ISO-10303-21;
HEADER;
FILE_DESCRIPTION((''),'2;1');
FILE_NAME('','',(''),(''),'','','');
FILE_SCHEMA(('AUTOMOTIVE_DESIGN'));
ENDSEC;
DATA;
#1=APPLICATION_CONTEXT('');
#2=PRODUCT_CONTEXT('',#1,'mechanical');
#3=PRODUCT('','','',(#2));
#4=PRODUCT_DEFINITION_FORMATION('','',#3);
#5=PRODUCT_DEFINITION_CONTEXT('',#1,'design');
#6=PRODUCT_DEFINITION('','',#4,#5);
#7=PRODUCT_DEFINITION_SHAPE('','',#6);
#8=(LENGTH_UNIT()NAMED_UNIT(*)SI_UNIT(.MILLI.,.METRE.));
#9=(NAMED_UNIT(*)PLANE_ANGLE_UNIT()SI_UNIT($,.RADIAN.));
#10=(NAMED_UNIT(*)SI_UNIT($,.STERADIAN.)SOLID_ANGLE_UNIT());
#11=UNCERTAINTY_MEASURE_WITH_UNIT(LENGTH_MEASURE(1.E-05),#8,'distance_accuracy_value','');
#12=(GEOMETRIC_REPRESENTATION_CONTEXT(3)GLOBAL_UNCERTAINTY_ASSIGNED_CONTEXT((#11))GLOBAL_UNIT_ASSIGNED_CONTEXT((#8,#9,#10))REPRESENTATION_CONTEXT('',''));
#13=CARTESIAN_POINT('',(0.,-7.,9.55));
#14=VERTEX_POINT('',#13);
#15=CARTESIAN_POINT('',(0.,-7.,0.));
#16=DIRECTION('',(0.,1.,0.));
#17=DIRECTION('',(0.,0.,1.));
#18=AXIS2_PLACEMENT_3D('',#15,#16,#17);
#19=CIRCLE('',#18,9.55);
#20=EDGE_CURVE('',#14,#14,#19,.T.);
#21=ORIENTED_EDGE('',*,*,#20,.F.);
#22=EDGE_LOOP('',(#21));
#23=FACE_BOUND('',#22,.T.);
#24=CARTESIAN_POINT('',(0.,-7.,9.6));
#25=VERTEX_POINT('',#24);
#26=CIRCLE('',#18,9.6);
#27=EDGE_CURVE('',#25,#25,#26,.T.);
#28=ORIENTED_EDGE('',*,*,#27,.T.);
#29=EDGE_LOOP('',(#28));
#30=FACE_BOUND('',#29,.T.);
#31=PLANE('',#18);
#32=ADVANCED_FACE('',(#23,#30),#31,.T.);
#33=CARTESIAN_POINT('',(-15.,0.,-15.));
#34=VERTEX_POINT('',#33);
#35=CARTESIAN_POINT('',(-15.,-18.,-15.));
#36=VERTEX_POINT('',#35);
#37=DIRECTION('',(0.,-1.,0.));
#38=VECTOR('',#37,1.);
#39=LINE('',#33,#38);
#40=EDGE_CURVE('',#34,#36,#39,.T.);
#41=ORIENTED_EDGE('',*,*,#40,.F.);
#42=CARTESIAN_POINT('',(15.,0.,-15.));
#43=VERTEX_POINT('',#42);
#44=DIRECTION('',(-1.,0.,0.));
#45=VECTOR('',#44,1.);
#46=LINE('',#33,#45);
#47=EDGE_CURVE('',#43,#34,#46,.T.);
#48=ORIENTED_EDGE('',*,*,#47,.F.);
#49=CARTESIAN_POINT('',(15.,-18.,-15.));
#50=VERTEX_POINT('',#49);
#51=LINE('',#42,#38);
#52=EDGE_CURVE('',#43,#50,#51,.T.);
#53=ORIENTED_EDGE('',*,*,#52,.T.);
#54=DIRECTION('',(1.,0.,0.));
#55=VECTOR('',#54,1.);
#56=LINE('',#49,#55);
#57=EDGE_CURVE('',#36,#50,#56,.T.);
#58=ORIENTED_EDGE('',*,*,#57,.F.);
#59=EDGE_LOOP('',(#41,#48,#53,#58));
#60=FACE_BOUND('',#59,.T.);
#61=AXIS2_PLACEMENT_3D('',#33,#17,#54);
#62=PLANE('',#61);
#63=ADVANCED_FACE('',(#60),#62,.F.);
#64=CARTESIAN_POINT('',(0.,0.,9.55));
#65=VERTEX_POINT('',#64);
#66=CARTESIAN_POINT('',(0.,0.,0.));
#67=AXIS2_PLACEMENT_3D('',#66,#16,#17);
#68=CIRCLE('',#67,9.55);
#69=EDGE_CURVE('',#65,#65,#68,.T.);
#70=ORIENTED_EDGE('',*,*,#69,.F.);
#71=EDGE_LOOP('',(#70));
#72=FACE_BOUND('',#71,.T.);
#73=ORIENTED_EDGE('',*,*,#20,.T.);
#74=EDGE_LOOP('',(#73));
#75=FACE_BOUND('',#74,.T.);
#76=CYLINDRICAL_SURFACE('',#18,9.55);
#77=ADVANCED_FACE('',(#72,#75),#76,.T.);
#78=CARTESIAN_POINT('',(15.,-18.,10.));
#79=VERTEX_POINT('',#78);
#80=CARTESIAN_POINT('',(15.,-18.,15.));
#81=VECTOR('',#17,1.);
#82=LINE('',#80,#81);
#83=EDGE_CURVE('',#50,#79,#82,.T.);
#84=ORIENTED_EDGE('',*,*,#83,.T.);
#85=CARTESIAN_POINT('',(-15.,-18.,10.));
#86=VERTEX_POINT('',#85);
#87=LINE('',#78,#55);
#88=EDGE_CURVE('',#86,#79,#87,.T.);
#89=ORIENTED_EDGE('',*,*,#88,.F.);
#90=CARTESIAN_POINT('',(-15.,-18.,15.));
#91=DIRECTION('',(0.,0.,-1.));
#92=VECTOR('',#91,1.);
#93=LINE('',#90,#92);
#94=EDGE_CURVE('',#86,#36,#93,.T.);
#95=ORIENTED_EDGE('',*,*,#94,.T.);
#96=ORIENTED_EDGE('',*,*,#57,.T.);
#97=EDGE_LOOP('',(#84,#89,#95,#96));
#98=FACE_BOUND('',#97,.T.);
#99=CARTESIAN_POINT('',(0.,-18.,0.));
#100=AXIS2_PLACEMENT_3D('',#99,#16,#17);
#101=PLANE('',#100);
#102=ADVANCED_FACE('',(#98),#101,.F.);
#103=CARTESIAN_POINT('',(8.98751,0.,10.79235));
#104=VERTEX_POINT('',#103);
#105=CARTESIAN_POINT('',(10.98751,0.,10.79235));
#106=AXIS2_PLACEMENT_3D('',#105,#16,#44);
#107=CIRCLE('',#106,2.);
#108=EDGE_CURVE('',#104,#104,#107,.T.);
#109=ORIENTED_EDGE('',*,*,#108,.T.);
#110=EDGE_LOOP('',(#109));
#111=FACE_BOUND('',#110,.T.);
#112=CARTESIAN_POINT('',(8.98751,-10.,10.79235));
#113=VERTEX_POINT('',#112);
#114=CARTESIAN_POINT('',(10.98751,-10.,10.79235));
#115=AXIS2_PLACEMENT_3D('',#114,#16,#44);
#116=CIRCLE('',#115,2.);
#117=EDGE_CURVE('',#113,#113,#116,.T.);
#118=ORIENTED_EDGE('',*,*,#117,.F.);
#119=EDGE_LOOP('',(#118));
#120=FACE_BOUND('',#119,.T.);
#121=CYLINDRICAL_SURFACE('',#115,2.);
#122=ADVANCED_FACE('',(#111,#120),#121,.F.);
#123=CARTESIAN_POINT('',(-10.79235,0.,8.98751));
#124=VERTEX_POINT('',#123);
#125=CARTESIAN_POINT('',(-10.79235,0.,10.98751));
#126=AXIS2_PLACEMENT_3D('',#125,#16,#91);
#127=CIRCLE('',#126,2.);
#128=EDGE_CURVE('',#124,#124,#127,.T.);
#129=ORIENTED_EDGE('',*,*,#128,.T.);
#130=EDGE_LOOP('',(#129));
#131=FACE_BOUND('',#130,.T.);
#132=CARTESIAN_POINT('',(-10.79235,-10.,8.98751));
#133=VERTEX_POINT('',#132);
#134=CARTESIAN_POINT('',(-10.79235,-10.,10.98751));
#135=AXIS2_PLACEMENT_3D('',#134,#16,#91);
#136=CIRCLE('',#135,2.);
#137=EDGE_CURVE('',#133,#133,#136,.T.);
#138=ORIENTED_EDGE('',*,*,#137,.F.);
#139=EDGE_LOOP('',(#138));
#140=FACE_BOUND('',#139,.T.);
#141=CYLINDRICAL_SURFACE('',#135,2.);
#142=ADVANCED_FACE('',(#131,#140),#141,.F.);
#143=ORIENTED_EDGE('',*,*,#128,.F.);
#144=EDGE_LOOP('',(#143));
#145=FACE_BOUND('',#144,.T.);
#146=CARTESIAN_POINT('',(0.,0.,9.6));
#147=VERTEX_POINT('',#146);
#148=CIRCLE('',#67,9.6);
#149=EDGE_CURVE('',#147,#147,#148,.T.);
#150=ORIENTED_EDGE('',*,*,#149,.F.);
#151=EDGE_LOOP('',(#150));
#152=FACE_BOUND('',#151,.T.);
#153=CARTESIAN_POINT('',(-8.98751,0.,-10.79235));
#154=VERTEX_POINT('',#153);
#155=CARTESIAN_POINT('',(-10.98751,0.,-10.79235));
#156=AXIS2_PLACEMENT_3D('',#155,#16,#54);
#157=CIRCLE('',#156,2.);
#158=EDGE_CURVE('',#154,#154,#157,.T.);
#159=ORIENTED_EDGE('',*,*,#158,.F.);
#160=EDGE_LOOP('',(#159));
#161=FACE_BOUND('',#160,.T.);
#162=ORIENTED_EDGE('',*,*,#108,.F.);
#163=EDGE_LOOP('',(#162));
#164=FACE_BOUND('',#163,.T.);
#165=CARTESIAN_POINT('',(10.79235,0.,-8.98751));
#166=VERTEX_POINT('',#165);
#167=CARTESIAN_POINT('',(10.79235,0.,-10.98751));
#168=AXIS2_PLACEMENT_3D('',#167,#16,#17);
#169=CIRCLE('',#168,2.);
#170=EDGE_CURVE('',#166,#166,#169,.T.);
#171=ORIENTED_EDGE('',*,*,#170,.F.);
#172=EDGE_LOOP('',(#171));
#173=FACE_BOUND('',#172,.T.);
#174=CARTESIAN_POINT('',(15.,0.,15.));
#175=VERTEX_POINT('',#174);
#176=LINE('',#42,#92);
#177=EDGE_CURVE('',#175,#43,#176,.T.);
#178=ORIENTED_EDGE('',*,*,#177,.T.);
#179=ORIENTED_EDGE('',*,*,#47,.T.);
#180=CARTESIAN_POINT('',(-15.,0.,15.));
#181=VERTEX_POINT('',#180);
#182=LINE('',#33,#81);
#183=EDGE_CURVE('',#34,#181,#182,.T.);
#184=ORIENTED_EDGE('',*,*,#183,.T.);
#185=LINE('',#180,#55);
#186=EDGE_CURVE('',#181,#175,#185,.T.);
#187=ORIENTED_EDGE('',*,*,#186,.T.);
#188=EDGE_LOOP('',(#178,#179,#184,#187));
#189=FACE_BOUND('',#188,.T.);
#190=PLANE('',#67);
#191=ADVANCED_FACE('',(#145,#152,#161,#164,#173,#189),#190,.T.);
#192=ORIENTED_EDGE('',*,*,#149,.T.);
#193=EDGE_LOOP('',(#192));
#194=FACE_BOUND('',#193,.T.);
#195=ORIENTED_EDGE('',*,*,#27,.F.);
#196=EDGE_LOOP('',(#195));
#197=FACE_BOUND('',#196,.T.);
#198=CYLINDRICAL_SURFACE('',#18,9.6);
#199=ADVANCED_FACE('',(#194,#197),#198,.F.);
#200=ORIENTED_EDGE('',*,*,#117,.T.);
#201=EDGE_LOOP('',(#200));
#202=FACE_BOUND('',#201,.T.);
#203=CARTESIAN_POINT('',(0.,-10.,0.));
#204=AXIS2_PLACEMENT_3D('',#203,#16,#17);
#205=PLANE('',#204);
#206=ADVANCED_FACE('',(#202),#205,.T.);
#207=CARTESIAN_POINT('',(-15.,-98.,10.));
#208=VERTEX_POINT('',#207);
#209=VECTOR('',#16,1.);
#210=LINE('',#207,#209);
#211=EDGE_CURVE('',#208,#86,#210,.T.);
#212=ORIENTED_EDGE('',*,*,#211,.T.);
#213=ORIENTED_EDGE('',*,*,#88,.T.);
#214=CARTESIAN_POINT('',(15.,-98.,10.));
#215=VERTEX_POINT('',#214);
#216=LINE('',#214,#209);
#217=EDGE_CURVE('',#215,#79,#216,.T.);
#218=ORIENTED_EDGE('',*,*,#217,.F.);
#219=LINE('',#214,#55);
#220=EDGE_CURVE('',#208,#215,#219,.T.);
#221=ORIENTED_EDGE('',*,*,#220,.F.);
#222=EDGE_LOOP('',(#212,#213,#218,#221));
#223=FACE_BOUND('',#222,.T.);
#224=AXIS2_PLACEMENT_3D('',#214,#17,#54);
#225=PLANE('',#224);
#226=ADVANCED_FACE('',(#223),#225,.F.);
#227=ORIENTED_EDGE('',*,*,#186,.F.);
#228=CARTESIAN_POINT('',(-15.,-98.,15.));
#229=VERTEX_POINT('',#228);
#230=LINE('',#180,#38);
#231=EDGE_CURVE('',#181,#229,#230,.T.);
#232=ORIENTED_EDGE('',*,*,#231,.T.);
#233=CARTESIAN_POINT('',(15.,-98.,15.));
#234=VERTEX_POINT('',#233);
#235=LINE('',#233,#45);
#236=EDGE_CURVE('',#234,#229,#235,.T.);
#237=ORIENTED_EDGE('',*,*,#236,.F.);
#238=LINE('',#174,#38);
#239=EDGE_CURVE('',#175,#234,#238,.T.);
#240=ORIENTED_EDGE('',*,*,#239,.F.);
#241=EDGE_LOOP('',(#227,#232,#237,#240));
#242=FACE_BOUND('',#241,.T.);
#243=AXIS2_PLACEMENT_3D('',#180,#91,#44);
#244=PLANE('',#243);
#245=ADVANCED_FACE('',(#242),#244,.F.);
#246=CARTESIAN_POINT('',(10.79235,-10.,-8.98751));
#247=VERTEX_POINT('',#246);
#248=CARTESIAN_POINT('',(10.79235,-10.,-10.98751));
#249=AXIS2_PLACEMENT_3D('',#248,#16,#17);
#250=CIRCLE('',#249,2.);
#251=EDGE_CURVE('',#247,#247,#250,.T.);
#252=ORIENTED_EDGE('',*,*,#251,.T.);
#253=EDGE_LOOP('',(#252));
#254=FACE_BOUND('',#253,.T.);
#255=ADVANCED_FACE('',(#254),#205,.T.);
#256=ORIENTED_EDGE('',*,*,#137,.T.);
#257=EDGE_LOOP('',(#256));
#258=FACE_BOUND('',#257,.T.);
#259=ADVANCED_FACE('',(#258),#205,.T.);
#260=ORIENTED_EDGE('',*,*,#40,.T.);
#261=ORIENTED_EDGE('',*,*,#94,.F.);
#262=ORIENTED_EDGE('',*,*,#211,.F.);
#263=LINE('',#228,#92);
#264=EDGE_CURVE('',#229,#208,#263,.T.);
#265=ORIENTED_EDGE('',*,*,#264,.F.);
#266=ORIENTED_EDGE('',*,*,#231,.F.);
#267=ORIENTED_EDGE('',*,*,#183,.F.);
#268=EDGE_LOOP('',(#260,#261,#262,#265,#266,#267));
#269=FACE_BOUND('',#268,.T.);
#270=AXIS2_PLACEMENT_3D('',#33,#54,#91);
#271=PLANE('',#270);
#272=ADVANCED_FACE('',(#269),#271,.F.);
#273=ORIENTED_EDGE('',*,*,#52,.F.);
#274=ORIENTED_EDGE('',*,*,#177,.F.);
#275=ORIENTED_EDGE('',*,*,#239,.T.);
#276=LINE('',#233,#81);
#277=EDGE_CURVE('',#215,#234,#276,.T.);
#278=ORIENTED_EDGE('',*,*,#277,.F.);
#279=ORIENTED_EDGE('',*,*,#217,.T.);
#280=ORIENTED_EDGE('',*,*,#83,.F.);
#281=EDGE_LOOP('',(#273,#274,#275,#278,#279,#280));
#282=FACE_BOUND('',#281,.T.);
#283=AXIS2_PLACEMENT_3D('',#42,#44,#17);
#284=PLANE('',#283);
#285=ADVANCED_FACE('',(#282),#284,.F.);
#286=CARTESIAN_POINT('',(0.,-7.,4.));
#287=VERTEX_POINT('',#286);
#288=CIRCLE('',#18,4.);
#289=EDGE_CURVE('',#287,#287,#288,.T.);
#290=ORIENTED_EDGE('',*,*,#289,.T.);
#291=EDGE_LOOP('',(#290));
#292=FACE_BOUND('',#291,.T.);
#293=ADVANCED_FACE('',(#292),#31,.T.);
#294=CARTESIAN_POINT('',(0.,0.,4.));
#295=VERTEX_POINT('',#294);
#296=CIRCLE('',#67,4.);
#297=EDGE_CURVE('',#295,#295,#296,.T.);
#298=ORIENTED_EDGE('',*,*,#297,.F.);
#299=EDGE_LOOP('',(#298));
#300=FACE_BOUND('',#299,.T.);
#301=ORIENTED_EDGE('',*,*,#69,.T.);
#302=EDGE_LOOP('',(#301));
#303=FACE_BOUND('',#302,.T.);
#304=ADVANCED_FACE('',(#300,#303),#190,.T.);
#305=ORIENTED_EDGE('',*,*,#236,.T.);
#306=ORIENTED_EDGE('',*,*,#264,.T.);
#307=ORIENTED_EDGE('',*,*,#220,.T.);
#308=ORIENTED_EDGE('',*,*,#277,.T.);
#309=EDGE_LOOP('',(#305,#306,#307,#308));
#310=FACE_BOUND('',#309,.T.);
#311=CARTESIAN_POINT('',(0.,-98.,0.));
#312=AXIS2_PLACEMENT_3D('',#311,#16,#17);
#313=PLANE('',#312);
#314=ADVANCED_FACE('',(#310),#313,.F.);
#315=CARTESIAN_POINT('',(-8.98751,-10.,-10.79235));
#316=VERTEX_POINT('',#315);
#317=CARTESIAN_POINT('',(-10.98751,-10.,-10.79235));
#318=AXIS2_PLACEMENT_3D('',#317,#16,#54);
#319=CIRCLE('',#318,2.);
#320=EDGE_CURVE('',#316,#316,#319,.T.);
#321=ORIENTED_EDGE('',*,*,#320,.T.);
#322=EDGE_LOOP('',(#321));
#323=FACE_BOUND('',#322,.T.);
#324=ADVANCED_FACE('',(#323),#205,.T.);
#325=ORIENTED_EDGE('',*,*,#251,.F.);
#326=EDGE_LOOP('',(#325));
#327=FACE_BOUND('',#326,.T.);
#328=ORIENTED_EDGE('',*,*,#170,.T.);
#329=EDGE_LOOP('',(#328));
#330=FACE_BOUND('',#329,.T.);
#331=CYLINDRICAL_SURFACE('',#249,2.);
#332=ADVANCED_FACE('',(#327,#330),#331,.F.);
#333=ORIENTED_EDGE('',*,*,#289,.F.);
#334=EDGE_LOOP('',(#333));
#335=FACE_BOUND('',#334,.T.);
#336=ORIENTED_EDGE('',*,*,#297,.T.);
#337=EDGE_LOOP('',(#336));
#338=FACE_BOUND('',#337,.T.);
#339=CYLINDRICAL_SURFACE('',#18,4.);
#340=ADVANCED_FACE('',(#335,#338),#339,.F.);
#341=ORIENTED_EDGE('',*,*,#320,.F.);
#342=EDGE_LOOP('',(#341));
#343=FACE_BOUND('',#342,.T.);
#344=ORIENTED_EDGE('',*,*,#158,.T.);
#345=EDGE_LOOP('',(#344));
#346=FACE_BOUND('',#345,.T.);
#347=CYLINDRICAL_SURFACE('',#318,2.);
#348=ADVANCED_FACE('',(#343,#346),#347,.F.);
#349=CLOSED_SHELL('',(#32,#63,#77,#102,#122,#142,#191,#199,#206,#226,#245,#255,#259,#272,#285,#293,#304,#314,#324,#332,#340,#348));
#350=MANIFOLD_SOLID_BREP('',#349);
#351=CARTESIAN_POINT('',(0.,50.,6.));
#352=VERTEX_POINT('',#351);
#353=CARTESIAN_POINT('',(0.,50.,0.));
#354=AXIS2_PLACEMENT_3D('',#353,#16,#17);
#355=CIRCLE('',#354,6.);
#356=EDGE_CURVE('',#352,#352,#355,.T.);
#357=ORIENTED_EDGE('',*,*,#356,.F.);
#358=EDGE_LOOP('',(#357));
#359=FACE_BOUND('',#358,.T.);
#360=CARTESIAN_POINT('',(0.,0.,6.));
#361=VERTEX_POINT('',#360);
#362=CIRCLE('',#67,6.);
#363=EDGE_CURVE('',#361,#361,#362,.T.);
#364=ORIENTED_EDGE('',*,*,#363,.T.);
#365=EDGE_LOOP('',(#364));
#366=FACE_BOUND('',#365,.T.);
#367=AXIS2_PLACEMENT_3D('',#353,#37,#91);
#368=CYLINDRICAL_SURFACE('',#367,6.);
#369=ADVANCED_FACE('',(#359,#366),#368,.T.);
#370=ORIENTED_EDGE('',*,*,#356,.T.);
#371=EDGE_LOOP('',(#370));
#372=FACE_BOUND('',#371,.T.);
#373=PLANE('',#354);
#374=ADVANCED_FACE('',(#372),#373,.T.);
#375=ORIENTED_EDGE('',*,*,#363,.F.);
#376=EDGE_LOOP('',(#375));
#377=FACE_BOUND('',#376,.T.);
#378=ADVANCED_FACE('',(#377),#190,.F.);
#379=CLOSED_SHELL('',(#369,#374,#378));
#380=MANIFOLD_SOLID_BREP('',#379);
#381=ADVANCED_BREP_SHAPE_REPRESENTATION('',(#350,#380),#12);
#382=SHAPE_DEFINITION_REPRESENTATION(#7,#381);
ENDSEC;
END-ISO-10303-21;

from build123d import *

# Parameters (mm, degrees)
SKETCH1_R                  = 6
BOSS_EXTRUDE1_DEPTH        = 50
BALL_START                 = -10
BALL_BEARING_OUTLINE_W     = 30
BALL_BEARING_OUTLINE_H     = 30
BALL_BEARING_OUTLINE_R     = 2
BALL_BEARING_OUTLINE_R_2   = 9.6
BALL_BEARING_OUTLINE_R_3   = 9.55
BALL_BEARING_OUTLINE_R_4   = 4
BALL_BEARING_DEPTH         = 10
BALL_BEARING_2_OUTLINE_R   = 9.6
BALL_BEARING_2_OUTLINE_R_2 = 9.55
BALL_BEARING_2_OUTLINE_R_3 = 4
BALL_BEARING_2_DEPTH       = 3
SKETCH6_W                  = 30
SKETCH6_H                  = 30
BOSS_EXTRUDE2_DEPTH        = 8
SKETCH7_W                  = 30
SKETCH7_H                  = 5
BOSS_EXTRUDE3_DEPTH        = 80


# Read off the part's stored shape, not the designer's step: ball bearing
with BuildPart() as part:
    # Sketch1 → Boss-Extrude1 (new body)
    with BuildSketch(Plane(origin=(0, 0, 0), x_dir=(1, 0, 0), z_dir=(0, 1, 0))):
        with Locations(Location((0, 0, 0), (0, 0, 270))):
            Circle(SKETCH1_R)
    extrude(amount=BOSS_EXTRUDE1_DEPTH)


with BuildPart() as body_2:
    # ball bearing outline → ball bearing (new body)
    # profile 1 of 2: a face of its own
    with BuildSketch(Plane(origin=(0, 0, 0), x_dir=(1, 0, 0), z_dir=(0, 1, 0)).offset(BALL_START)):
        Rectangle(BALL_BEARING_OUTLINE_W, BALL_BEARING_OUTLINE_H)
        with Locations((-10.792349727, -10.987509758)):
            Circle(BALL_BEARING_OUTLINE_R, mode=Mode.SUBTRACT)
        with Locations((10.987509758, -10.792349727)):
            Circle(BALL_BEARING_OUTLINE_R, mode=Mode.SUBTRACT)
        with Locations((-10.987509758, 10.792349727)):
            Circle(BALL_BEARING_OUTLINE_R, mode=Mode.SUBTRACT)
        Circle(BALL_BEARING_OUTLINE_R_2, mode=Mode.SUBTRACT)
        with Locations((10.792349727, 10.987509758)):
            Circle(BALL_BEARING_OUTLINE_R, mode=Mode.SUBTRACT)
    # profile 2 of 2: a face of its own
    with BuildSketch(Plane(origin=(0, 0, 0), x_dir=(1, 0, 0), z_dir=(0, 1, 0)).offset(BALL_START)):
        Circle(BALL_BEARING_OUTLINE_R_3)
        Circle(BALL_BEARING_OUTLINE_R_4, mode=Mode.SUBTRACT)
    extrude(amount=BALL_BEARING_DEPTH)

    # ball bearing 2 outline → ball bearing 2 (add)
    # profile 1 of 2: a face of its own
    with BuildSketch(Plane(origin=(0, 0, 0), x_dir=(1, 0, 0), z_dir=(0, 1, 0)).offset(BALL_START)):
        Circle(BALL_BEARING_2_OUTLINE_R)
        Circle(BALL_BEARING_2_OUTLINE_R_2, mode=Mode.SUBTRACT)
    # profile 2 of 2: a face of its own
    with BuildSketch(Plane(origin=(0, 0, 0), x_dir=(1, 0, 0), z_dir=(0, 1, 0)).offset(BALL_START)):
        Circle(BALL_BEARING_2_OUTLINE_R_3)
    extrude(amount=BALL_BEARING_2_DEPTH)

    # Sketch6 → Boss-Extrude2 (add)
    with BuildSketch(Plane.XZ.offset(10)):
        Rectangle(SKETCH6_W, SKETCH6_H)
    extrude(amount=BOSS_EXTRUDE2_DEPTH)

    # Sketch7 → Boss-Extrude3 (add)
    with BuildSketch(Plane.XZ.offset(18)):
        with Locations((0, 12.5)):
            Rectangle(SKETCH7_W, SKETCH7_H)
    extrude(amount=BOSS_EXTRUDE3_DEPTH)


solid = Compound([part.part, body_2.part])
